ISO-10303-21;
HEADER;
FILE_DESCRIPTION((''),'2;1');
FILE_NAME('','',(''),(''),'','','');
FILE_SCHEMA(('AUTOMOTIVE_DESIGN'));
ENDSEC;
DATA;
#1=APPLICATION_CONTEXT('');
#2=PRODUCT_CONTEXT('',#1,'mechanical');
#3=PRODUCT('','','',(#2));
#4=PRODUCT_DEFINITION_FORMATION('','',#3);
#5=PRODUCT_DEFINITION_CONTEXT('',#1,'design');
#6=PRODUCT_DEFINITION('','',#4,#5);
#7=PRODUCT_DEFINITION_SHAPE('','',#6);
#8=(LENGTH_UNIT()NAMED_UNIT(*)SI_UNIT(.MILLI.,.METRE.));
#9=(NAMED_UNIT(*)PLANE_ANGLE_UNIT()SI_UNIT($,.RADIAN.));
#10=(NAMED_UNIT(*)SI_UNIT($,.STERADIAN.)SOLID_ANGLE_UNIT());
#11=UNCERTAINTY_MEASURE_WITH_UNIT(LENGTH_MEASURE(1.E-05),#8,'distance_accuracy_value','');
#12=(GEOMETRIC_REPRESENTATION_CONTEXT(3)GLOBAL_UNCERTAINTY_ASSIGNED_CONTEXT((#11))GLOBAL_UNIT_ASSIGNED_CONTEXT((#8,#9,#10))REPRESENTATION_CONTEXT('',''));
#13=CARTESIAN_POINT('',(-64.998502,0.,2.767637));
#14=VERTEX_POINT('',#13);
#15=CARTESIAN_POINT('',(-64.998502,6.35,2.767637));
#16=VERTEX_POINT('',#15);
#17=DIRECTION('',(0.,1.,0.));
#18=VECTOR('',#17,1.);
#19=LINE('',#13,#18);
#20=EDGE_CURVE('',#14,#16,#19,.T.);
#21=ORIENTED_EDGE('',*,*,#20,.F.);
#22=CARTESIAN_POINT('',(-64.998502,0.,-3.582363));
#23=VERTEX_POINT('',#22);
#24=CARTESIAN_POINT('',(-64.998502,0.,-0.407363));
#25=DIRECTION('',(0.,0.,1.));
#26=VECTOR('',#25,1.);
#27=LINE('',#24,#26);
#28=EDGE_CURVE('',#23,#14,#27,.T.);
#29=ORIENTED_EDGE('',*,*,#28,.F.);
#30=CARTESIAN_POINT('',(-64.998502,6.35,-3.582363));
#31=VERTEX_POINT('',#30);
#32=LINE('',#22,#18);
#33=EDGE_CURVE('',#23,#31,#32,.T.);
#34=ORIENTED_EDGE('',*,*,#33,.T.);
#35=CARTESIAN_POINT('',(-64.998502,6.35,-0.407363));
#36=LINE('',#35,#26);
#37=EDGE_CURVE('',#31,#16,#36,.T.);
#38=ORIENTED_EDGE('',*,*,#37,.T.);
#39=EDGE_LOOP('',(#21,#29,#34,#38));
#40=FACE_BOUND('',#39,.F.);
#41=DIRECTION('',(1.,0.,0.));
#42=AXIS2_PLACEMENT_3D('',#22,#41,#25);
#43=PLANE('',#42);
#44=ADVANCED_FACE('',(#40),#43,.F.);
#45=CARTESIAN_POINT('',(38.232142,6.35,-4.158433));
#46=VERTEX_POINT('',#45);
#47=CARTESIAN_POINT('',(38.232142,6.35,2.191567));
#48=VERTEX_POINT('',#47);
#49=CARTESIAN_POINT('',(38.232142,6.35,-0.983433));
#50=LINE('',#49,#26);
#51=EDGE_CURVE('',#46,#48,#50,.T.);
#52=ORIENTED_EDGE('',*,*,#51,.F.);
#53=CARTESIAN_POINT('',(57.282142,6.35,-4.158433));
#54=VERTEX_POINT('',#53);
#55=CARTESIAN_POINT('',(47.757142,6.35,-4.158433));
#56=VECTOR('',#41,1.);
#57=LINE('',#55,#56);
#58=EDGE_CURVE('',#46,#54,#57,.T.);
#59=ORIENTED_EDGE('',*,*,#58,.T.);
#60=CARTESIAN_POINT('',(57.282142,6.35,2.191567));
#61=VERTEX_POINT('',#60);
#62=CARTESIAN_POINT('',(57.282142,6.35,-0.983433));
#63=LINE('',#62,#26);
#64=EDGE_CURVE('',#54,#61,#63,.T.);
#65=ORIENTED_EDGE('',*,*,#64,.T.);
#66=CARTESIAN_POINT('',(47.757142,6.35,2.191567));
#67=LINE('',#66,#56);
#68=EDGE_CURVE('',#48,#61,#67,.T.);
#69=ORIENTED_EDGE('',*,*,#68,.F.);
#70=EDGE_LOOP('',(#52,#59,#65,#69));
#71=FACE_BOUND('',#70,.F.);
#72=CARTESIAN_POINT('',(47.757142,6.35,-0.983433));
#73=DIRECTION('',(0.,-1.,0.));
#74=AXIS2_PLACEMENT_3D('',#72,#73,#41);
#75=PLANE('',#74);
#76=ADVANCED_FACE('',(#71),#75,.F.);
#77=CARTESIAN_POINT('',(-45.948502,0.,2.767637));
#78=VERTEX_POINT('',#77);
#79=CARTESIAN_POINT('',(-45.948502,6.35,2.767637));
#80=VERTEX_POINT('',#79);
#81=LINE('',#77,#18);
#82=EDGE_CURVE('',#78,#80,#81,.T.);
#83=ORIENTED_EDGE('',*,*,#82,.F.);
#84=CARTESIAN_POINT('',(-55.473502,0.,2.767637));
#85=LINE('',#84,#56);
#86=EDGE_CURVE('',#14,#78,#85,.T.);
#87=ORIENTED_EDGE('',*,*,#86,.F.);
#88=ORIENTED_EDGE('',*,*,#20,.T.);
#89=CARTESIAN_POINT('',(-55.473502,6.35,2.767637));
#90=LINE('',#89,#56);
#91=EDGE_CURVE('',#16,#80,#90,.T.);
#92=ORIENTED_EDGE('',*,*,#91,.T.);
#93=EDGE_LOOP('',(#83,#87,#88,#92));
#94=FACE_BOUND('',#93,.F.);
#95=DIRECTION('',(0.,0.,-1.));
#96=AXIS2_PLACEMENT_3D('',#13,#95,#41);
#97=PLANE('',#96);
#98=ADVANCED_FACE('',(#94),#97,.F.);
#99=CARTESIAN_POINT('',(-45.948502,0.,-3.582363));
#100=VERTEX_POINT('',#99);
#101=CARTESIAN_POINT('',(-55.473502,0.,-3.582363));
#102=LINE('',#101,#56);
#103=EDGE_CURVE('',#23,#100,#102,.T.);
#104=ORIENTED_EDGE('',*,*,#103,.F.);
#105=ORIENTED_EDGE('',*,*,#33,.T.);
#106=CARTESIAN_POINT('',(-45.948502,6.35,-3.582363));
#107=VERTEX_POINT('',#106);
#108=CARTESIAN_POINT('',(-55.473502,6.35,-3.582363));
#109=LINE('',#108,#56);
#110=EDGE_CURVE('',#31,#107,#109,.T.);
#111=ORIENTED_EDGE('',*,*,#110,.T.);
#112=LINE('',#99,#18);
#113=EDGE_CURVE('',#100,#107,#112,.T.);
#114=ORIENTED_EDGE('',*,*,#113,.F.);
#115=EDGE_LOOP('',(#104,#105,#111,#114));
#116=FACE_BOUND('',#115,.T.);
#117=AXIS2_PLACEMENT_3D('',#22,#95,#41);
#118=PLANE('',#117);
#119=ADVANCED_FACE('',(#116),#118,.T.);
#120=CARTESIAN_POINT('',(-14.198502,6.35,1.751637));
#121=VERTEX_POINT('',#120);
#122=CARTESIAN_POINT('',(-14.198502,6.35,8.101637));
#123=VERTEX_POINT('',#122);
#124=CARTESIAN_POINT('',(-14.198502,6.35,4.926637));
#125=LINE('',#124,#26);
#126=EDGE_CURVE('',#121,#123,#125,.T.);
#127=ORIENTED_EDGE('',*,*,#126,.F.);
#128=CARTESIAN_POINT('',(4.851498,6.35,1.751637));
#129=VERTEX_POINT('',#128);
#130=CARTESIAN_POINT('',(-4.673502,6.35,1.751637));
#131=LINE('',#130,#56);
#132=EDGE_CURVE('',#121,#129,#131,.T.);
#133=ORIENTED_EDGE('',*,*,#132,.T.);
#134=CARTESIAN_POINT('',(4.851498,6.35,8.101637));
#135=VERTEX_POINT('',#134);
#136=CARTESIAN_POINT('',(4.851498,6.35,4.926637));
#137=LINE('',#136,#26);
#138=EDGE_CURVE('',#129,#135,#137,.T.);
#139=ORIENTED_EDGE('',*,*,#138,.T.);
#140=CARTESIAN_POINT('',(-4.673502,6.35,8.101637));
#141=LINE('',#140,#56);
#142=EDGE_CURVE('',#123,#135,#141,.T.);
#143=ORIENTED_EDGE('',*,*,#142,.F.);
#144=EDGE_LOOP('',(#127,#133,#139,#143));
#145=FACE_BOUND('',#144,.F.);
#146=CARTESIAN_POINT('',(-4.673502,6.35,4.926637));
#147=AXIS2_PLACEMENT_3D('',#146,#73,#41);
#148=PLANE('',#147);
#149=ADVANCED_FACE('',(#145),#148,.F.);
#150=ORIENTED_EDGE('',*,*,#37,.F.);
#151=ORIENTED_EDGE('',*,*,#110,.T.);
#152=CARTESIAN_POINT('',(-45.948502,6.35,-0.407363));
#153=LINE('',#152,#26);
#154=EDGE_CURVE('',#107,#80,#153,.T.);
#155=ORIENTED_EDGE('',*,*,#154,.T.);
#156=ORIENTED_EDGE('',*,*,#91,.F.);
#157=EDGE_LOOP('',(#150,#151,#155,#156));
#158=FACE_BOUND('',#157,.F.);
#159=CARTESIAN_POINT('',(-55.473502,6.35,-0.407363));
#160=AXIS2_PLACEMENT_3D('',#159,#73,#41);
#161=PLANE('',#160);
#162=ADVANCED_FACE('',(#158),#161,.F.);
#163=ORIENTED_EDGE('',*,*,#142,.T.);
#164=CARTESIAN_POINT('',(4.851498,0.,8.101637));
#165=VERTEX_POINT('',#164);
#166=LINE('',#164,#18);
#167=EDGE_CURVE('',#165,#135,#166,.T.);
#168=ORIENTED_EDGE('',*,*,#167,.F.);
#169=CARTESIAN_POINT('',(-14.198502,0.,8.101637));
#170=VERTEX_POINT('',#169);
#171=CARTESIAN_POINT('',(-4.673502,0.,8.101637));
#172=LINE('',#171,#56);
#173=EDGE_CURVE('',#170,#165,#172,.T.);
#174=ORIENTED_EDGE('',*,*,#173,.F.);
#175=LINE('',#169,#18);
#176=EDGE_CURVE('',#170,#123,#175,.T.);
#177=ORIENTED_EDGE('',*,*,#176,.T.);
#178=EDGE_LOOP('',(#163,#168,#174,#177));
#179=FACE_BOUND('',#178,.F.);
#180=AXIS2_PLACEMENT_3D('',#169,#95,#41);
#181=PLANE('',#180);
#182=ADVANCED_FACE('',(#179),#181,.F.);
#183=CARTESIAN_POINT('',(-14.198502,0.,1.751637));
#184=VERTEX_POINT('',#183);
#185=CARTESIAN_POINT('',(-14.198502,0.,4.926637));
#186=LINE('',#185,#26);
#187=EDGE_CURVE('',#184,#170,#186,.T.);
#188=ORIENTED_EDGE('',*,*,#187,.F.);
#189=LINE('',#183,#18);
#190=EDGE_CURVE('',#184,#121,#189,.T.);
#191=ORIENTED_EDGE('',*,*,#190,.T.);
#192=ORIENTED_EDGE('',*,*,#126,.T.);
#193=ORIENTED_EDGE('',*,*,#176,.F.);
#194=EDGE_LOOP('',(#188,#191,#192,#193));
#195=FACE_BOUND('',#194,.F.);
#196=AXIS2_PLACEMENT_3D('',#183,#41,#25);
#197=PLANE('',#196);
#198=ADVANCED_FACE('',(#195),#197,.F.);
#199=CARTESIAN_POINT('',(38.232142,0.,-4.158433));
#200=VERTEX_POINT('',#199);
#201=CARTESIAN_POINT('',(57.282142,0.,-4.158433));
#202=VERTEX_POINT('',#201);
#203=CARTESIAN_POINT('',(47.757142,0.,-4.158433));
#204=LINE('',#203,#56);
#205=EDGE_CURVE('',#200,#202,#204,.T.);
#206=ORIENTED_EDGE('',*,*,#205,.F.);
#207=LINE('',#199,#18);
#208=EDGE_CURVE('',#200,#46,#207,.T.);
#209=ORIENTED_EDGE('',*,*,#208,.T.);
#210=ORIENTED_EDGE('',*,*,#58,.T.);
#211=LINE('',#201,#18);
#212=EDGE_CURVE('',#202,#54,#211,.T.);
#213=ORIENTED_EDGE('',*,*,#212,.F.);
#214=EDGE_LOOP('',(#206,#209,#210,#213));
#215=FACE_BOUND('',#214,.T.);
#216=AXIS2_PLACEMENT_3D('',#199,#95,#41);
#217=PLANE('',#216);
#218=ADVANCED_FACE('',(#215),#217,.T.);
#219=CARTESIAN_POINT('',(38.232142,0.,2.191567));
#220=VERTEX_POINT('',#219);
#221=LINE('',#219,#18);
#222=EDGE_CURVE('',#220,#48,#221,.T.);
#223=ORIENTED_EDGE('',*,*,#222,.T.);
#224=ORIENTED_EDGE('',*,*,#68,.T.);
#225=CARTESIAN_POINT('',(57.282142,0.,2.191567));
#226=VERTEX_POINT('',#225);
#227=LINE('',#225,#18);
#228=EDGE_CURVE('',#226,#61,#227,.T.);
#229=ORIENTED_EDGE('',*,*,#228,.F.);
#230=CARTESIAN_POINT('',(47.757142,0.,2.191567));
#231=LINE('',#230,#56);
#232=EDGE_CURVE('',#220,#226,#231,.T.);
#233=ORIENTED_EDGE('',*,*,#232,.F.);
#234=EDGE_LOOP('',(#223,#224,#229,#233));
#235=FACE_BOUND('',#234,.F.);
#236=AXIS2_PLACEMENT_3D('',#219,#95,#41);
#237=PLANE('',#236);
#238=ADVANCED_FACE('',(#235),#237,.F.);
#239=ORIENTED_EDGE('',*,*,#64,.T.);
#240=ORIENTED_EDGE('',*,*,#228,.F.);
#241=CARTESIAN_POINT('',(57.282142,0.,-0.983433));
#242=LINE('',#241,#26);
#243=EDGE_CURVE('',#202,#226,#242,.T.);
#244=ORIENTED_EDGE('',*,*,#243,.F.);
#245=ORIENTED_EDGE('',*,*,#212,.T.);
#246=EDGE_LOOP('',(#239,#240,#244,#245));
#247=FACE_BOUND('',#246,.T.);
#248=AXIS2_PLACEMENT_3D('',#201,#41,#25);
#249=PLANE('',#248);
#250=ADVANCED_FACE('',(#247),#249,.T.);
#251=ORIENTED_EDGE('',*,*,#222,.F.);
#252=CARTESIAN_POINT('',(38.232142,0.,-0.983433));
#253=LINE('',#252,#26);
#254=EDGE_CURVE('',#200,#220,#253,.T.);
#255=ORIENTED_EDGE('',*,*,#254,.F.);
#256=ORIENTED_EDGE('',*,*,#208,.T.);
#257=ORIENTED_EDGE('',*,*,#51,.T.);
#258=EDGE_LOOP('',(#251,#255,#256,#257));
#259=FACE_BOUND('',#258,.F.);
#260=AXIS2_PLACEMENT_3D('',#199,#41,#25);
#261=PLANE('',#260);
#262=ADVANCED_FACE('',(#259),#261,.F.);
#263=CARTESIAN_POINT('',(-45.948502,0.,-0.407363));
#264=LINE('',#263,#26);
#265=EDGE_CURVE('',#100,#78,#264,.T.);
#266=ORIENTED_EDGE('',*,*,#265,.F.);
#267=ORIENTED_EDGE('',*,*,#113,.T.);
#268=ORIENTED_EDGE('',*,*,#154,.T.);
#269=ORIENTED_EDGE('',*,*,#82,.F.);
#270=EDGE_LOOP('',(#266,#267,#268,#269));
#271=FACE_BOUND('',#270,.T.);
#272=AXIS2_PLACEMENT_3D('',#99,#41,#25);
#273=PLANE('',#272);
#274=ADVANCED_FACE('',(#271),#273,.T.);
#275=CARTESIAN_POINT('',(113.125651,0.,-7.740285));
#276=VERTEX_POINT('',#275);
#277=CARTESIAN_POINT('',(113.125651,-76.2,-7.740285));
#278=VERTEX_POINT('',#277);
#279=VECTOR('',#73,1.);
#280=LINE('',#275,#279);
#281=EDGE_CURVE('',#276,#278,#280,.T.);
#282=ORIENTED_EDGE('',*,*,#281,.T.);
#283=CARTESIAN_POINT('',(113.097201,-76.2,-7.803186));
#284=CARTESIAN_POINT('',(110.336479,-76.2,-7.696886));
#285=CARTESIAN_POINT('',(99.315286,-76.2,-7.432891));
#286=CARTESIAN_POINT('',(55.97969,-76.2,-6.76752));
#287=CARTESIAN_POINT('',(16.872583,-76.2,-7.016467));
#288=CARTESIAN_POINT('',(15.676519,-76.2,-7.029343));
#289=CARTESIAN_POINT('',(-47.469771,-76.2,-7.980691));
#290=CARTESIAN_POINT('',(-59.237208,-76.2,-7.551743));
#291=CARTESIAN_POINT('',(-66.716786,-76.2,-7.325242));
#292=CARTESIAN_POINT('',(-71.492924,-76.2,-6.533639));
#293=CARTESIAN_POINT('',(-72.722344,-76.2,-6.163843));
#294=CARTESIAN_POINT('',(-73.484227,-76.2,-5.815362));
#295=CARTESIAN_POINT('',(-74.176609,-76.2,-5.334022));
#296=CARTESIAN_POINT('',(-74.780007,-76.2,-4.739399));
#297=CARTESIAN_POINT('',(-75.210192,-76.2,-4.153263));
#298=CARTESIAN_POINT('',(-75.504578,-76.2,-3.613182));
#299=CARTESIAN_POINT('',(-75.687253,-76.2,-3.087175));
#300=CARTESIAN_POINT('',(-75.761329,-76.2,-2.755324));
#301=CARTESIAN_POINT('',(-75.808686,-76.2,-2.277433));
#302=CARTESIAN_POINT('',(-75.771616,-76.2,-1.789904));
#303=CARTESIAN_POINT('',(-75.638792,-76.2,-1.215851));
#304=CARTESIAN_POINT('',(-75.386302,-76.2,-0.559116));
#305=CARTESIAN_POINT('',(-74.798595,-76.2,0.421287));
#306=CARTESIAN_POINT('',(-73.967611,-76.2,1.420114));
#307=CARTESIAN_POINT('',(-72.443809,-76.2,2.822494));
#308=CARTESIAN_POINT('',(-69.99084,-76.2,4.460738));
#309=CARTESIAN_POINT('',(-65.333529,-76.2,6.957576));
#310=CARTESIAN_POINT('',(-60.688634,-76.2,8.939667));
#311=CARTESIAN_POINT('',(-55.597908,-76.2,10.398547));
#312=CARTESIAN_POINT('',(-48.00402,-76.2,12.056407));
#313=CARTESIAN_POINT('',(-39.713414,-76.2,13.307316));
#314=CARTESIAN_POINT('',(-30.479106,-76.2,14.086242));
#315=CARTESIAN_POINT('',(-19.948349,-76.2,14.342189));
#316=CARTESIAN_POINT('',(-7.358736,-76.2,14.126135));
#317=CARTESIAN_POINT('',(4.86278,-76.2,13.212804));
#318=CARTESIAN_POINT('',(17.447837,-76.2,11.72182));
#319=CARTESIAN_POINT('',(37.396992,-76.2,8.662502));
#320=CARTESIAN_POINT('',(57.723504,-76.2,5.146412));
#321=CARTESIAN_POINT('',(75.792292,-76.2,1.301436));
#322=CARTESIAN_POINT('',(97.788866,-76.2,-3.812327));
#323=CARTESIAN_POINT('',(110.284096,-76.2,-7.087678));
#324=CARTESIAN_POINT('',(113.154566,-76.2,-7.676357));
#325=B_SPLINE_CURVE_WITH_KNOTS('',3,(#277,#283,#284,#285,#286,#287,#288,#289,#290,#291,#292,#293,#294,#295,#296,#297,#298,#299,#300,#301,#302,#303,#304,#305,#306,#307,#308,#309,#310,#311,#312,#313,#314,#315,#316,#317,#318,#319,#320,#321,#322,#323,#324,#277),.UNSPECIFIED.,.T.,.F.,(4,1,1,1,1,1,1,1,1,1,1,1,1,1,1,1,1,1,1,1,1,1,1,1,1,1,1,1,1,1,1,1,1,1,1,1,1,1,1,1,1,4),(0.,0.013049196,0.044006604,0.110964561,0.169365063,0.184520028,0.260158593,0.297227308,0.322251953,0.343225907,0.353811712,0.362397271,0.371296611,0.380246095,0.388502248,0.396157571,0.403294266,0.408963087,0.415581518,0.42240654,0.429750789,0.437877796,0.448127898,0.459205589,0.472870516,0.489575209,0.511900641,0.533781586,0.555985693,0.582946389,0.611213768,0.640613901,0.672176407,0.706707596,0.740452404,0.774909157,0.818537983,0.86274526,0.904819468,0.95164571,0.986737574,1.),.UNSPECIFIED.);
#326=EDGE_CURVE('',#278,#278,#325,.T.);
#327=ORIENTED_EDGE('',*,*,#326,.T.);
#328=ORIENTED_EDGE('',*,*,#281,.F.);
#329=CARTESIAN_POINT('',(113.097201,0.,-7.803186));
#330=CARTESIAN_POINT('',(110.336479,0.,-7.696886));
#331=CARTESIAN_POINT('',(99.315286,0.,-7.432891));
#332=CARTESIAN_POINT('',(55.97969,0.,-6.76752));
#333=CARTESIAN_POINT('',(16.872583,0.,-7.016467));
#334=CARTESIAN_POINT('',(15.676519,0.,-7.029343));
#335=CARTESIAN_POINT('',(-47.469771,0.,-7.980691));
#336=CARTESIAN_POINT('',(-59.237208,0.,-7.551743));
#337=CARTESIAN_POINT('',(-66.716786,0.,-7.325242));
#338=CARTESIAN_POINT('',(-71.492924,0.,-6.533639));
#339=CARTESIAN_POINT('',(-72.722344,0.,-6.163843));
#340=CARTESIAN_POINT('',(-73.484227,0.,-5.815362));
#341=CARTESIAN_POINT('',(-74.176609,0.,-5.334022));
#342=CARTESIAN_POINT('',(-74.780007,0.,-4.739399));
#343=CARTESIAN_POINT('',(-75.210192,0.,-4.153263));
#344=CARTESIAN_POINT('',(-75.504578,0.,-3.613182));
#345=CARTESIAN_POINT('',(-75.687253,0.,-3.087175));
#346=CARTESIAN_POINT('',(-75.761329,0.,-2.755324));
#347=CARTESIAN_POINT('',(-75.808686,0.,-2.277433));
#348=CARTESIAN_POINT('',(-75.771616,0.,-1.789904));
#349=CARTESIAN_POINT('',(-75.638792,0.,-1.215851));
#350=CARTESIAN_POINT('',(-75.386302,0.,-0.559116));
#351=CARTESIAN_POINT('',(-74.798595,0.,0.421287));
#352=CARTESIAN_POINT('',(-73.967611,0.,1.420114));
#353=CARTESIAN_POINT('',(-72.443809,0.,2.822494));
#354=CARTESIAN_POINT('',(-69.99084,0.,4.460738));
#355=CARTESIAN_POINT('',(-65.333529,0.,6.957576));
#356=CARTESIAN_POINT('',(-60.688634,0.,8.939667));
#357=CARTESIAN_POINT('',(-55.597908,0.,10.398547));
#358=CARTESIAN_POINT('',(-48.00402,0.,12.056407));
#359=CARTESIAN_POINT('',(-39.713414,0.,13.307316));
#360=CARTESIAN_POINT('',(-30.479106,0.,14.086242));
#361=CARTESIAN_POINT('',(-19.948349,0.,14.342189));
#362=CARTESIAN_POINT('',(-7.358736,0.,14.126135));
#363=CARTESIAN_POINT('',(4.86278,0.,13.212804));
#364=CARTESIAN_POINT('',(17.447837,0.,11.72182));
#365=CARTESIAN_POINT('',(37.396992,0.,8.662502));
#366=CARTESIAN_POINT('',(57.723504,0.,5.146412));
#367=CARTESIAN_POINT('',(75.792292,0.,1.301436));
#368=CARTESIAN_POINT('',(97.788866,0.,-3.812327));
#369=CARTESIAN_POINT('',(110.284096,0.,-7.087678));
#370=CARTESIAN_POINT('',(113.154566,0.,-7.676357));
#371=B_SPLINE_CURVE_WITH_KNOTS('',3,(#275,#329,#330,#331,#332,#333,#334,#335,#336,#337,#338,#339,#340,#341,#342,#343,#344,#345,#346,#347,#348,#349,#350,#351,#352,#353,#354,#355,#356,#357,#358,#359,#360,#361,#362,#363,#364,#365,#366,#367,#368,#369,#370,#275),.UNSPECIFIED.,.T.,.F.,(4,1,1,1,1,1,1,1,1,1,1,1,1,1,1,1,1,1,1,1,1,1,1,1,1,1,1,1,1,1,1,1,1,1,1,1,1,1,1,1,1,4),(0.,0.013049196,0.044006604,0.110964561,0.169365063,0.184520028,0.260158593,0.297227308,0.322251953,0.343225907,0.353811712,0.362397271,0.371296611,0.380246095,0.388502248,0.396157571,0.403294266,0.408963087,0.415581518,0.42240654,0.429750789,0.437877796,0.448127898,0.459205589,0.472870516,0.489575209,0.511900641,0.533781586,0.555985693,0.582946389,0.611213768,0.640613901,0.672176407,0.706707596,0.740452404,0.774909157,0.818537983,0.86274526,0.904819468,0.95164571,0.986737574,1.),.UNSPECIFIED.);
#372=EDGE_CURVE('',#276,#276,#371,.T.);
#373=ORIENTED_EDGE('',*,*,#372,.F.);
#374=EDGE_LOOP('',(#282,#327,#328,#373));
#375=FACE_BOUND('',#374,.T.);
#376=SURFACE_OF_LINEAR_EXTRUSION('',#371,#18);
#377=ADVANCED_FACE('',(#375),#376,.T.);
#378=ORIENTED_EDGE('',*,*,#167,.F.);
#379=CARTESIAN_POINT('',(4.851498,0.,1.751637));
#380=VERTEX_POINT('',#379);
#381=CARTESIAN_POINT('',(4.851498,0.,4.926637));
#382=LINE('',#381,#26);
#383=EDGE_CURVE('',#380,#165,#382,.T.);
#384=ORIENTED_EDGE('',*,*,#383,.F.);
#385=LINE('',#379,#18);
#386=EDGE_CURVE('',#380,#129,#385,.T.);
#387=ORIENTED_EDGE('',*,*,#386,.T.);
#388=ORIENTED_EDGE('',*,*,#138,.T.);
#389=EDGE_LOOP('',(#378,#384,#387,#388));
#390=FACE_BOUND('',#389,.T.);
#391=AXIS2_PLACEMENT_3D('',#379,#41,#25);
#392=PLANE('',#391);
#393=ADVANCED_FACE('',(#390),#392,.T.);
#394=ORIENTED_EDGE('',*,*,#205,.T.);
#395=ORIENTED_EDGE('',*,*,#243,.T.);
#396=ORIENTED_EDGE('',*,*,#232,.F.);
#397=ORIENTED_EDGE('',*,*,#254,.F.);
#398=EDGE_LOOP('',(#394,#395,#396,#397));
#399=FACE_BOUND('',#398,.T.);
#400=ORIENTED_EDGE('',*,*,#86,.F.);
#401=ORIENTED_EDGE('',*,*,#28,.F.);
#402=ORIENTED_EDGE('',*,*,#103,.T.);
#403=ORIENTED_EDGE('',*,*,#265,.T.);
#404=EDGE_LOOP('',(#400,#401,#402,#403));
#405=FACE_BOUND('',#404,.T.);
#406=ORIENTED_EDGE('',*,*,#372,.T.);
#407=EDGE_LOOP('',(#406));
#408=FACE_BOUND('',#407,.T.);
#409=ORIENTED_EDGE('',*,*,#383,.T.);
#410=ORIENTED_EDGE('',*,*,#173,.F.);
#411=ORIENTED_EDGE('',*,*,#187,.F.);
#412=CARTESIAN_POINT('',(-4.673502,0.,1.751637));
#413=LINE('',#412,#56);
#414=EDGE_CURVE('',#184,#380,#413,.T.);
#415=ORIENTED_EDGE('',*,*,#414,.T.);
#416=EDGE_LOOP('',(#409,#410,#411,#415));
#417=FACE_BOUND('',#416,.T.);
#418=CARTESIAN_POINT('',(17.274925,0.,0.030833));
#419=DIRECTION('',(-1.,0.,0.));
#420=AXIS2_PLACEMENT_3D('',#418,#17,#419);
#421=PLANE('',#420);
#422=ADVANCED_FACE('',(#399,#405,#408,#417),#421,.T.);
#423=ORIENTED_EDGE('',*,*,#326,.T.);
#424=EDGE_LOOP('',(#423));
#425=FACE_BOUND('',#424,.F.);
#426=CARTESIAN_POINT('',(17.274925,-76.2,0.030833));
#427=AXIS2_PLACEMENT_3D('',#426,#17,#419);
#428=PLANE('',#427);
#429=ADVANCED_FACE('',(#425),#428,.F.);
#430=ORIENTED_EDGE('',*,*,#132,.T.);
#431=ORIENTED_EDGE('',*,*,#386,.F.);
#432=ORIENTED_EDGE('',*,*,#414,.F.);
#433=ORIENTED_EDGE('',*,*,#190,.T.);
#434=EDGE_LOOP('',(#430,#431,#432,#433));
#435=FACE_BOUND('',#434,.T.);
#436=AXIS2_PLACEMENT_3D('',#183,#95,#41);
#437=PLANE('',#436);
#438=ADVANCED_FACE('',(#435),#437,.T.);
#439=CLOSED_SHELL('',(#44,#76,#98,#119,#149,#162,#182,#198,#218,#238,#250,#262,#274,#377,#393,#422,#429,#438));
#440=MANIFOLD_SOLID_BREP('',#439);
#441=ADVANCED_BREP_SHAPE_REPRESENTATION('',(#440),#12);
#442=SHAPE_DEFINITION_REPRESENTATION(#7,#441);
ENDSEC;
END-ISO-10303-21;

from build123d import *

# Parameters (mm, degrees)
F0_W     = 19.05
F0_H     = 6.35
F1_DEPTH = 76.2
F2_DEPTH = 6.35


# Not quite as in the source:
# - the dataset's text gives a spline's control points without its knots; the knots are read off the source's solid


with BuildPart() as f1:
    # F0 (on Front) → F1 (new body)
    with BuildSketch(Plane.XZ):
        with BuildLine():
            add(Edge.make_bspline(
                [(113.1256508208, -7.7402851731), (113.097200705, -7.8031856437), (110.3364793373, -7.6968863686), (99.3152862089, -7.4328909753), (55.9796904977, -6.7675201656), (16.8725827, -7.0164671979), (15.6765189296, -7.0293432408), (-47.4697706514, -7.9806912282), (-59.2372081566, -7.5517426686), (-66.7167856923, -7.3252423551), (-71.4929241921, -6.5336386662), (-72.7223444909, -6.1638428264), (-73.4842272273, -5.8153616349), (-74.1766086139, -5.3340215063), (-74.7800065829, -4.7393990674), (-75.2101915382, -4.1532632538), (-75.5045783983, -3.6131817045), (-75.687252981, -3.0871754263), (-75.7613287218, -2.7553238198), (-75.8086858659, -2.2774327515), (-75.7716160209, -1.7899042913), (-75.6387924297, -1.2158513369), (-75.3863023669, -0.5591157083), (-74.7985947775, 0.4212869121), (-73.9676114059, 1.4201144876), (-72.4438088281, 2.8224936522), (-69.9908402735, 4.4607384308), (-65.3335290261, 6.9575761188), (-60.68863408, 8.9396673965), (-55.5979076782, 10.3985471041), (-48.0040197216, 12.0564073917), (-39.7134136622, 13.3073162495), (-30.4791055277, 14.086241923), (-19.9483485157, 14.3421894431), (-7.3587359983, 14.1261353089), (4.8627801197, 13.2128038161), (17.447836634, 11.7218204499), (37.3969921311, 8.6625017009), (57.7235038813, 5.1464122385), (75.7922924691, 1.3014360791), (97.7888660124, -3.8123268572), (110.2840958287, -7.0876782322), (113.154565826, -7.6763568769), (113.1256508208, -7.7402851731)],
                knots=[0, 0, 0, 0, 0.0130491957, 0.0440066043, 0.1109645612, 0.1693650629, 0.1845200279, 0.2601585935, 0.297227308, 0.3222519534, 0.3432259075, 0.3538117117, 0.3623972714, 0.3712966115, 0.3802460949, 0.3885022479, 0.3961575709, 0.4032942665, 0.4089630871, 0.4155815182, 0.42240654, 0.4297507891, 0.4378777956, 0.4481278983, 0.459205589, 0.4728705156, 0.4895752088, 0.5119006412, 0.5337815859, 0.555985693, 0.5829463887, 0.6112137679, 0.6406139011, 0.6721764069, 0.7067075957, 0.7404524036, 0.7749091572, 0.8185379831, 0.8627452602, 0.9048194685, 0.9516457096, 0.9867375738, 1, 1, 1, 1], degree=3))
        make_face()
        with Locations((-55.4735022347, -0.4073630356)):
            Rectangle(F0_W, F0_H, mode=Mode.SUBTRACT)
        with Locations((47.7571423614, -0.9834326582)):
            Rectangle(F0_W, F0_H, mode=Mode.SUBTRACT)
        with Locations((-4.6735022347, 4.9266369644)):
            Rectangle(F0_W, F0_H, mode=Mode.SUBTRACT)
        with Locations((-55.4735022347, -0.4073630356)):
            Rectangle(F0_W, F0_H)
        with Locations((-4.6735022347, 4.9266369644)):
            Rectangle(F0_W, F0_H)
        with Locations((47.7571423614, -0.9834326582)):
            Rectangle(F0_W, F0_H)
    extrude(amount=F1_DEPTH)

    # F0 (on Front) → F2 (join)
    with BuildSketch(Plane.XZ):
        with Locations((-55.4735022347, -0.4073630356)):
            Rectangle(F0_W, F0_H)
        with Locations((-4.6735022347, 4.9266369644)):
            Rectangle(F0_W, F0_H)
        with Locations((47.7571423614, -0.9834326582)):
            Rectangle(F0_W, F0_H)
    extrude(amount=-F2_DEPTH)


solid = f1.part
